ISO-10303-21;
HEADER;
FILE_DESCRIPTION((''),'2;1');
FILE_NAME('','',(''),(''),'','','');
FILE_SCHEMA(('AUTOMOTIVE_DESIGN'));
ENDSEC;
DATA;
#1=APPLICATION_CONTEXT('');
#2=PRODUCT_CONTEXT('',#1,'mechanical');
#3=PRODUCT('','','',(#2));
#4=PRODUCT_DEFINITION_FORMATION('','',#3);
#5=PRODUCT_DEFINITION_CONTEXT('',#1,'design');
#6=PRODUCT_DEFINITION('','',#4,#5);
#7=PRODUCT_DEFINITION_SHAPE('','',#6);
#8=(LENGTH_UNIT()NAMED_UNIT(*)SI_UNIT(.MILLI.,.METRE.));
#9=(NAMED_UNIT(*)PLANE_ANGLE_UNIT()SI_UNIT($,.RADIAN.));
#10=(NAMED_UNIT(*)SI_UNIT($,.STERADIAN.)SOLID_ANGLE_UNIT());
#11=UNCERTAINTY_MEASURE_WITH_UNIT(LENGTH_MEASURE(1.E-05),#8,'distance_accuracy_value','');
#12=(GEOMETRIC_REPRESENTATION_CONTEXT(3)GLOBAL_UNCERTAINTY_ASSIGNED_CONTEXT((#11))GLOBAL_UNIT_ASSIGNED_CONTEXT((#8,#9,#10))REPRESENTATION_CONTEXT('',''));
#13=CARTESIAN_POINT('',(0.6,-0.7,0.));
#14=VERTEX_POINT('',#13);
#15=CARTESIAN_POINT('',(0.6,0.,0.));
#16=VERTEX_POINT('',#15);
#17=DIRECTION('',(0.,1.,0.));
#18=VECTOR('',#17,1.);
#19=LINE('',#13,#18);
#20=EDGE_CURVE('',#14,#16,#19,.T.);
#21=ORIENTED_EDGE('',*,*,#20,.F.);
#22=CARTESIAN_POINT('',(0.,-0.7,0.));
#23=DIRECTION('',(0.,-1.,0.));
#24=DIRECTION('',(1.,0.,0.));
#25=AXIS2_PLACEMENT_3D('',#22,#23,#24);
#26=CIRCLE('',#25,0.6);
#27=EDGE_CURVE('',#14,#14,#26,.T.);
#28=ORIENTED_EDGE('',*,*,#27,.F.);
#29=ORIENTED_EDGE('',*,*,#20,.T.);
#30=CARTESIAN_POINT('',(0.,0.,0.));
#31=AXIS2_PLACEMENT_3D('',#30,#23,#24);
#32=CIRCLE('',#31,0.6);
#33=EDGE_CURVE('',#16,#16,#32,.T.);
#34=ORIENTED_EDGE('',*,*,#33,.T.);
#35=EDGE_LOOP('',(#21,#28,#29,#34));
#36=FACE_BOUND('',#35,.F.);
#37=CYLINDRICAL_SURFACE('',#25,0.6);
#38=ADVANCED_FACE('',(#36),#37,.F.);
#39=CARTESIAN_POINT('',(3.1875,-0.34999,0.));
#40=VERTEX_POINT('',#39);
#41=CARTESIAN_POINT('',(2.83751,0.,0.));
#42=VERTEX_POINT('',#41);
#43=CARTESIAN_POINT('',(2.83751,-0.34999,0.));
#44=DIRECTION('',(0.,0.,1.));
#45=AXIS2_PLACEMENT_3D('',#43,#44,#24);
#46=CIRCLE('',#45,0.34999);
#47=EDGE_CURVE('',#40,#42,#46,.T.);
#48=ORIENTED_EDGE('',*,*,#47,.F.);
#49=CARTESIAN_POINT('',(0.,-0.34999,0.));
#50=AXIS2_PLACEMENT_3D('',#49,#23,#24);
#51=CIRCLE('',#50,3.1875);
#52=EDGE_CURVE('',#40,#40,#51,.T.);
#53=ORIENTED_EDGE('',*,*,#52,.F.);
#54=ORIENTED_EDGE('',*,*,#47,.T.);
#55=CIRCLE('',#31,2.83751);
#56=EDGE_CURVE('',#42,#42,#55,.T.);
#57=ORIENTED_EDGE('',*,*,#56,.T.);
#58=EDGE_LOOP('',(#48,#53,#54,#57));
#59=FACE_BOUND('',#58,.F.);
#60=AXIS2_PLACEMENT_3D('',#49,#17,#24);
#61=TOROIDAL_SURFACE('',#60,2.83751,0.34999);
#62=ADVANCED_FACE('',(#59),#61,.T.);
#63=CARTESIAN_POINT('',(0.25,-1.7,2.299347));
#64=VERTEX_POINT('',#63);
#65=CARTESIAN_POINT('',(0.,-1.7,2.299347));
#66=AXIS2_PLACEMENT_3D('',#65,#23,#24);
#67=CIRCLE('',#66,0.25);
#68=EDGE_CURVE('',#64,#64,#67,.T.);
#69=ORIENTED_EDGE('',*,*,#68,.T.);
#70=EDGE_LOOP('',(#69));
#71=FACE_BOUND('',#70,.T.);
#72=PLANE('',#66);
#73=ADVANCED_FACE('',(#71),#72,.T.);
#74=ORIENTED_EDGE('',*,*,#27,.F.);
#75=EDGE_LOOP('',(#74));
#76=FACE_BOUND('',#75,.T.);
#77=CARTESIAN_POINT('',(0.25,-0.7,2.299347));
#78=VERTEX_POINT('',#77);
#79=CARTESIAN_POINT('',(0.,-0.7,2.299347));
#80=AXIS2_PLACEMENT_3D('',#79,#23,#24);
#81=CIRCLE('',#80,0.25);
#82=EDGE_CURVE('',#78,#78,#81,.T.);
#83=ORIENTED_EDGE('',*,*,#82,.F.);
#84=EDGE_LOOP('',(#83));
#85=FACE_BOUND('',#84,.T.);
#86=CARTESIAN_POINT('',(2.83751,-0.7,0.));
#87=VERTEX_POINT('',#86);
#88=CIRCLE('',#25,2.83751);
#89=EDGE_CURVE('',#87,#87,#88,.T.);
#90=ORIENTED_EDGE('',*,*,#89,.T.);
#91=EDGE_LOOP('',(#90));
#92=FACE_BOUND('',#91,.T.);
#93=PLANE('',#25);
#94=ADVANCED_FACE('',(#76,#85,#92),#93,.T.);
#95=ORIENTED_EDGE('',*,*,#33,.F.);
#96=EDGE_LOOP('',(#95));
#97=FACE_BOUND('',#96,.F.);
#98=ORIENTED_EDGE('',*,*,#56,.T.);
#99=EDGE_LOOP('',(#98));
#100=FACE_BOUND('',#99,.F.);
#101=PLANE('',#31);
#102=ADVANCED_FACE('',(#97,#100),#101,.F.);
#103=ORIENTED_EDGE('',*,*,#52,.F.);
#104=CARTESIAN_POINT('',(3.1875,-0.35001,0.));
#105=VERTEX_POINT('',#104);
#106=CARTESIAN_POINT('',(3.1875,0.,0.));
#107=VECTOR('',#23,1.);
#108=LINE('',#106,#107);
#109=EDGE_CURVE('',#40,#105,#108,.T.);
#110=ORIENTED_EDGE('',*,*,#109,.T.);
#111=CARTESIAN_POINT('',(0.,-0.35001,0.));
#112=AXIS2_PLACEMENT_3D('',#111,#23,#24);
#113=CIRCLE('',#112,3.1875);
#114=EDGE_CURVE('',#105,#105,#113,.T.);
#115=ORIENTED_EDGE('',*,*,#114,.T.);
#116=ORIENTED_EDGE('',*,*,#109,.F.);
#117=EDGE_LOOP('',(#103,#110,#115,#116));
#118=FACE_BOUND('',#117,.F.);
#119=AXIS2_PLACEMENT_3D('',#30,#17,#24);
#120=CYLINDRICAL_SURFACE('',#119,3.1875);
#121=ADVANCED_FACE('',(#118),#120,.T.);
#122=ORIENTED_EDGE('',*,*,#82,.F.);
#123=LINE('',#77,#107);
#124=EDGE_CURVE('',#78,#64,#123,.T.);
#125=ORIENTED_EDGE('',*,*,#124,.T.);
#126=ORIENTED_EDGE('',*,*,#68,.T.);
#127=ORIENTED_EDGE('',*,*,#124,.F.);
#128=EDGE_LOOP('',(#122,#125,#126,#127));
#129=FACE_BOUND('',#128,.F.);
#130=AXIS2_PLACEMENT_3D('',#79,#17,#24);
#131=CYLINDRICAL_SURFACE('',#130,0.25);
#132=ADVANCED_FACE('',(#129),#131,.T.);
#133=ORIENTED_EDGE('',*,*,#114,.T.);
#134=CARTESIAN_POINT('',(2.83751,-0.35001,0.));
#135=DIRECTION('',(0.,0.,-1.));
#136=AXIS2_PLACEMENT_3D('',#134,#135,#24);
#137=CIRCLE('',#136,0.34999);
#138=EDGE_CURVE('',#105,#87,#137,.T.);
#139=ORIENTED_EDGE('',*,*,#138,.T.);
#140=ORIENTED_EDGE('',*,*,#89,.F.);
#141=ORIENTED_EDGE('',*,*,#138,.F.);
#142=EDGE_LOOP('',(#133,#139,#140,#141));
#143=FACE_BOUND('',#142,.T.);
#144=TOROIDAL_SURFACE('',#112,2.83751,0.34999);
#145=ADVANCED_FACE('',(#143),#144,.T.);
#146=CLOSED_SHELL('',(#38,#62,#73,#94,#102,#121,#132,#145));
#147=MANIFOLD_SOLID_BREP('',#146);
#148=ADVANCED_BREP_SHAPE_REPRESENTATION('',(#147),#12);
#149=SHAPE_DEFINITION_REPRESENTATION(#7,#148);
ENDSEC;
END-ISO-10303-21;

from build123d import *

# Parameters (mm, degrees)
F0_R     = 3.1875
F1_DEPTH = 0.7
F2_R     = 0.6
F3_DEPTH = 25
F4_R     = 0.34999
F5_R     = 0.25
F6_DEPTH = 1


# Not quite as in the source:
# - a fillet or chamfer is up to 0.001 mm smaller than in the source, because OpenCascade refuses the exact size


with BuildPart() as f1:
    # F0 (on Front) → F1 (new body)
    with BuildSketch(Plane.XZ):
        Circle(F0_R)
    extrude(amount=F1_DEPTH)

    # F2 (on face) → F3 (cut)
    with BuildSketch(Plane.XZ.offset(0.7)):
        Circle(F2_R)
    extrude(amount=-F3_DEPTH, mode=Mode.SUBTRACT)

    # F4 (radius 0.35 in the source; OpenCascade refuses exactly that, so slightly less here)
    f4_edges = [f1.edges().sort_by_distance(p)[0] for p in [
        (3.1875, -0.35, 0),
        (-3.1875, 0, 0),
        (-3.1875, -0.7, 0),
    ]]
    fillet(f4_edges, radius=F4_R)

    # F5 (on face) → F6 (join)
    with BuildSketch(Plane.XZ.offset(0.7)):
        with Locations((0, 2.2993473568)):
            Circle(F5_R)
    extrude(amount=F6_DEPTH)


solid = f1.part
